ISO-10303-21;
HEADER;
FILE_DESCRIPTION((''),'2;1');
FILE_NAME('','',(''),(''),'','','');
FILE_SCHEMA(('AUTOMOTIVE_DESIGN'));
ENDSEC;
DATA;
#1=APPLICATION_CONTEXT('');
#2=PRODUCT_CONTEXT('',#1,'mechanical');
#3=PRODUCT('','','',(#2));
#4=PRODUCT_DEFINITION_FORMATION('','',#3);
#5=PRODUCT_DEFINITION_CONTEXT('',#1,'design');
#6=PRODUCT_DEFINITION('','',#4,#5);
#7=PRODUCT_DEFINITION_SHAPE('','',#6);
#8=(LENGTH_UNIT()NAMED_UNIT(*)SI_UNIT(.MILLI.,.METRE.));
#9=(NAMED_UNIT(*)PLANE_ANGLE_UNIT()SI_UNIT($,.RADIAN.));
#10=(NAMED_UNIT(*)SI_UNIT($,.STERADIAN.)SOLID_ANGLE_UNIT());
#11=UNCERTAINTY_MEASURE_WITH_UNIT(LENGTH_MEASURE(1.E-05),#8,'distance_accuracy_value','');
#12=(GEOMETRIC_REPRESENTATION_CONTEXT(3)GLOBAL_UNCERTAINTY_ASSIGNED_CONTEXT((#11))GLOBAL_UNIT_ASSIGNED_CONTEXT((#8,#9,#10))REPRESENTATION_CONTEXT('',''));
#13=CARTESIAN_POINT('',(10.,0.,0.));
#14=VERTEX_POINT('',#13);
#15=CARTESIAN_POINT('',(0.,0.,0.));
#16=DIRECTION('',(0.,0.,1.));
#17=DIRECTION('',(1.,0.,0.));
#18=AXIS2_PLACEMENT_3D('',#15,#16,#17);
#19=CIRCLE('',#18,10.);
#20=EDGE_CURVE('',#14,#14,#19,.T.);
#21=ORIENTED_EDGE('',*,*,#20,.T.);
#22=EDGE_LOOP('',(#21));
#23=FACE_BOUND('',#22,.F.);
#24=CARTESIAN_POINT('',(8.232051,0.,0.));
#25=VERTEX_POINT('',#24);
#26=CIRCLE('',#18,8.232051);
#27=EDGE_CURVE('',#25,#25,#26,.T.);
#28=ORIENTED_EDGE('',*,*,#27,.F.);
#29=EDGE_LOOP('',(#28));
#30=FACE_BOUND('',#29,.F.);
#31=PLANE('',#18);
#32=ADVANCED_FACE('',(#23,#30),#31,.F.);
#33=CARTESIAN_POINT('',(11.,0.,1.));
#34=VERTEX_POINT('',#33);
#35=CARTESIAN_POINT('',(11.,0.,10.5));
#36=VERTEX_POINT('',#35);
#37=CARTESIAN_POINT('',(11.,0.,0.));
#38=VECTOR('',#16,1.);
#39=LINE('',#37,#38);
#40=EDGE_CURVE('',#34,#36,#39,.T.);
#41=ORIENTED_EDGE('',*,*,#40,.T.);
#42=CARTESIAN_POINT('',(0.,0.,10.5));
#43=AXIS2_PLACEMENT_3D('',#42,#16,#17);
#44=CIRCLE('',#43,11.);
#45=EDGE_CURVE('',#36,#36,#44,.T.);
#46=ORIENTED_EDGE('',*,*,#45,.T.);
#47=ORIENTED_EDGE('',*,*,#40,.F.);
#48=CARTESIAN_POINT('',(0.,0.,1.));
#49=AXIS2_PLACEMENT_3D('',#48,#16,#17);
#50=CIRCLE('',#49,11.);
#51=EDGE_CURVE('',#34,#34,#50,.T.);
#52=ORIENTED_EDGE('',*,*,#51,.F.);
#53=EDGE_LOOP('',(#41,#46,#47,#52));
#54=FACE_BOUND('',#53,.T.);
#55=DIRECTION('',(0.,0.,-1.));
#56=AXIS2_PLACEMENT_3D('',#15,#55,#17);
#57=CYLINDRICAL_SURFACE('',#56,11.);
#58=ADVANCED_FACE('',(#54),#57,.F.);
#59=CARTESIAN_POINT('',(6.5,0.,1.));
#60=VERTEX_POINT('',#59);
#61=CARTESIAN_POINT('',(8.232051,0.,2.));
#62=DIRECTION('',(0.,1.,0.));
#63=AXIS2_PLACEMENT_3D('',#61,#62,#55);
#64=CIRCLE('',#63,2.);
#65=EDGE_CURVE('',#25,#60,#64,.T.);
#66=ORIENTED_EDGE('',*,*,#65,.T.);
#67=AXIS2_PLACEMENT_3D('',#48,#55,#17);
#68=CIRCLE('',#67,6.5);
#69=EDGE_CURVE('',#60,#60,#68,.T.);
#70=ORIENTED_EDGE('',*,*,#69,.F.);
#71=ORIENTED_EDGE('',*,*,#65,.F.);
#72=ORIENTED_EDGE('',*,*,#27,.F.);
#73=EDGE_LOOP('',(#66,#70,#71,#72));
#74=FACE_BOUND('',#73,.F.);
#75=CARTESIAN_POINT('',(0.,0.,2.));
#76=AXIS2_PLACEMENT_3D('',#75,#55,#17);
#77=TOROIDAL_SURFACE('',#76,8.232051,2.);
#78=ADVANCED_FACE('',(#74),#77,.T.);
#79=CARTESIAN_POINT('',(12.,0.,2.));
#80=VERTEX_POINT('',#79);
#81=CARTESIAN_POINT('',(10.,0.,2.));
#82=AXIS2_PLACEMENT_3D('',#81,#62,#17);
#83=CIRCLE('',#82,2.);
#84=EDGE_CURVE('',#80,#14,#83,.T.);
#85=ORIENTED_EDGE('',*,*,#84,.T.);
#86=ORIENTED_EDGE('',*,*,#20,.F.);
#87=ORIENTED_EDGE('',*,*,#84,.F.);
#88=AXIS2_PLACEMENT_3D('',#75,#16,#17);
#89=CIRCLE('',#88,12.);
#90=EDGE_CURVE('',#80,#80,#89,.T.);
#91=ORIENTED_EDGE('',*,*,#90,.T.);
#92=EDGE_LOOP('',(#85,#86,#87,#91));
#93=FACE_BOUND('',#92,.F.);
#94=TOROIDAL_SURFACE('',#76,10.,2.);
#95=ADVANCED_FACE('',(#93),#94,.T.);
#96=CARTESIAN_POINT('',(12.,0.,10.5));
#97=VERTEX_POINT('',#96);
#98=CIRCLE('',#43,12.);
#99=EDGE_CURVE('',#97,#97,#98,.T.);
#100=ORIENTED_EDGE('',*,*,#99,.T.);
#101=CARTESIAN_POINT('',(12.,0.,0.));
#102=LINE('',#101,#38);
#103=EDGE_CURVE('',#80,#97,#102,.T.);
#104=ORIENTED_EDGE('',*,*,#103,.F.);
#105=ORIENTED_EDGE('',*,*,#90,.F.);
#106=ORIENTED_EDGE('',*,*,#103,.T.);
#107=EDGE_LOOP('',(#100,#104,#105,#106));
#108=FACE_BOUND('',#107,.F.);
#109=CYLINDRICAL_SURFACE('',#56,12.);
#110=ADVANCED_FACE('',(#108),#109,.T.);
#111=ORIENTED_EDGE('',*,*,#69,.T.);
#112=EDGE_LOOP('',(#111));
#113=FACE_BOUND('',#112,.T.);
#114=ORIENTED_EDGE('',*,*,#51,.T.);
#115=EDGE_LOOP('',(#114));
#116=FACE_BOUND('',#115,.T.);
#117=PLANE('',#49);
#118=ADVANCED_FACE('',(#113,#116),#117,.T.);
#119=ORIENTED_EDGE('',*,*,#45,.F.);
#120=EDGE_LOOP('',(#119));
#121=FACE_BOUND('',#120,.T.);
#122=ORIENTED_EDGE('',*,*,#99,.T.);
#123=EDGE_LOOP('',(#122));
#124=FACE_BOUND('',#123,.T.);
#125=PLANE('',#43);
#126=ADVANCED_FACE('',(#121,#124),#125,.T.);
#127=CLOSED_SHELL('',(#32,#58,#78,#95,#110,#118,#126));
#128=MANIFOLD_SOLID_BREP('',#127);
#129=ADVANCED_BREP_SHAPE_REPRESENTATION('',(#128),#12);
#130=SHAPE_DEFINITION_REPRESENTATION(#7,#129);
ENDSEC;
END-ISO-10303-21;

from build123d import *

# Parameters (mm, degrees)
F0_R     = 12
F0_R_2   = 11
F1_DEPTH = 10.5
F2_DEPTH = 1
F3_R     = 6.5
F4_DEPTH = 25


# Not quite as in the source:
# - a fillet or chamfer that OpenCascade refuses, or shapes differently, is made with other operations: its cross-section is extruded or revolved along the edge and cut away or added


with BuildPart() as f1:
    # F0 (on Top) → F1 (new body)
    with BuildSketch(Plane.XY):
        Circle(F0_R)
        Circle(F0_R_2, mode=Mode.SUBTRACT)
    extrude(amount=F1_DEPTH)

    # F0 (on Top) → F2 (join)
    with BuildSketch(Plane.XY):
        Circle(F0_R_2)
    extrude(amount=F2_DEPTH)

    # F3 (on face) → F4 (cut)
    with BuildSketch(Plane.XY):
        Circle(F3_R)
    extrude(amount=F4_DEPTH, mode=Mode.SUBTRACT)

    # F5: fillet of radius 2 on 2 edges, made by hand

    # F5_s1 → F5_t2 (revolve, cut)
    with BuildSketch(Plane.XZ):
        with BuildLine():
            ThreePointArc((12, 2), (11.4142135624, 0.5857864376), (10, 0))
            Line((10, 0), (12, 0))
            Line((12, 0), (12, 2))
        make_face()
    revolve(axis=Axis((0, 0, 0), (0, 0, 1)), mode=Mode.SUBTRACT)

    # F5_s3 → F5_t4 (revolve, cut)
    with BuildSketch(Plane.XZ):
        with BuildLine():
            ThreePointArc((8.2320508076, 0), (7.2320508076, 0.2679491924), (6.5, 1))
            Line((6.5, 1), (6.5, 0))
            Line((6.5, 0), (8.2320508076, 0))
        make_face()
    revolve(axis=Axis((0, 0, 0), (0, 0, 1)), mode=Mode.SUBTRACT)


solid = f1.part
